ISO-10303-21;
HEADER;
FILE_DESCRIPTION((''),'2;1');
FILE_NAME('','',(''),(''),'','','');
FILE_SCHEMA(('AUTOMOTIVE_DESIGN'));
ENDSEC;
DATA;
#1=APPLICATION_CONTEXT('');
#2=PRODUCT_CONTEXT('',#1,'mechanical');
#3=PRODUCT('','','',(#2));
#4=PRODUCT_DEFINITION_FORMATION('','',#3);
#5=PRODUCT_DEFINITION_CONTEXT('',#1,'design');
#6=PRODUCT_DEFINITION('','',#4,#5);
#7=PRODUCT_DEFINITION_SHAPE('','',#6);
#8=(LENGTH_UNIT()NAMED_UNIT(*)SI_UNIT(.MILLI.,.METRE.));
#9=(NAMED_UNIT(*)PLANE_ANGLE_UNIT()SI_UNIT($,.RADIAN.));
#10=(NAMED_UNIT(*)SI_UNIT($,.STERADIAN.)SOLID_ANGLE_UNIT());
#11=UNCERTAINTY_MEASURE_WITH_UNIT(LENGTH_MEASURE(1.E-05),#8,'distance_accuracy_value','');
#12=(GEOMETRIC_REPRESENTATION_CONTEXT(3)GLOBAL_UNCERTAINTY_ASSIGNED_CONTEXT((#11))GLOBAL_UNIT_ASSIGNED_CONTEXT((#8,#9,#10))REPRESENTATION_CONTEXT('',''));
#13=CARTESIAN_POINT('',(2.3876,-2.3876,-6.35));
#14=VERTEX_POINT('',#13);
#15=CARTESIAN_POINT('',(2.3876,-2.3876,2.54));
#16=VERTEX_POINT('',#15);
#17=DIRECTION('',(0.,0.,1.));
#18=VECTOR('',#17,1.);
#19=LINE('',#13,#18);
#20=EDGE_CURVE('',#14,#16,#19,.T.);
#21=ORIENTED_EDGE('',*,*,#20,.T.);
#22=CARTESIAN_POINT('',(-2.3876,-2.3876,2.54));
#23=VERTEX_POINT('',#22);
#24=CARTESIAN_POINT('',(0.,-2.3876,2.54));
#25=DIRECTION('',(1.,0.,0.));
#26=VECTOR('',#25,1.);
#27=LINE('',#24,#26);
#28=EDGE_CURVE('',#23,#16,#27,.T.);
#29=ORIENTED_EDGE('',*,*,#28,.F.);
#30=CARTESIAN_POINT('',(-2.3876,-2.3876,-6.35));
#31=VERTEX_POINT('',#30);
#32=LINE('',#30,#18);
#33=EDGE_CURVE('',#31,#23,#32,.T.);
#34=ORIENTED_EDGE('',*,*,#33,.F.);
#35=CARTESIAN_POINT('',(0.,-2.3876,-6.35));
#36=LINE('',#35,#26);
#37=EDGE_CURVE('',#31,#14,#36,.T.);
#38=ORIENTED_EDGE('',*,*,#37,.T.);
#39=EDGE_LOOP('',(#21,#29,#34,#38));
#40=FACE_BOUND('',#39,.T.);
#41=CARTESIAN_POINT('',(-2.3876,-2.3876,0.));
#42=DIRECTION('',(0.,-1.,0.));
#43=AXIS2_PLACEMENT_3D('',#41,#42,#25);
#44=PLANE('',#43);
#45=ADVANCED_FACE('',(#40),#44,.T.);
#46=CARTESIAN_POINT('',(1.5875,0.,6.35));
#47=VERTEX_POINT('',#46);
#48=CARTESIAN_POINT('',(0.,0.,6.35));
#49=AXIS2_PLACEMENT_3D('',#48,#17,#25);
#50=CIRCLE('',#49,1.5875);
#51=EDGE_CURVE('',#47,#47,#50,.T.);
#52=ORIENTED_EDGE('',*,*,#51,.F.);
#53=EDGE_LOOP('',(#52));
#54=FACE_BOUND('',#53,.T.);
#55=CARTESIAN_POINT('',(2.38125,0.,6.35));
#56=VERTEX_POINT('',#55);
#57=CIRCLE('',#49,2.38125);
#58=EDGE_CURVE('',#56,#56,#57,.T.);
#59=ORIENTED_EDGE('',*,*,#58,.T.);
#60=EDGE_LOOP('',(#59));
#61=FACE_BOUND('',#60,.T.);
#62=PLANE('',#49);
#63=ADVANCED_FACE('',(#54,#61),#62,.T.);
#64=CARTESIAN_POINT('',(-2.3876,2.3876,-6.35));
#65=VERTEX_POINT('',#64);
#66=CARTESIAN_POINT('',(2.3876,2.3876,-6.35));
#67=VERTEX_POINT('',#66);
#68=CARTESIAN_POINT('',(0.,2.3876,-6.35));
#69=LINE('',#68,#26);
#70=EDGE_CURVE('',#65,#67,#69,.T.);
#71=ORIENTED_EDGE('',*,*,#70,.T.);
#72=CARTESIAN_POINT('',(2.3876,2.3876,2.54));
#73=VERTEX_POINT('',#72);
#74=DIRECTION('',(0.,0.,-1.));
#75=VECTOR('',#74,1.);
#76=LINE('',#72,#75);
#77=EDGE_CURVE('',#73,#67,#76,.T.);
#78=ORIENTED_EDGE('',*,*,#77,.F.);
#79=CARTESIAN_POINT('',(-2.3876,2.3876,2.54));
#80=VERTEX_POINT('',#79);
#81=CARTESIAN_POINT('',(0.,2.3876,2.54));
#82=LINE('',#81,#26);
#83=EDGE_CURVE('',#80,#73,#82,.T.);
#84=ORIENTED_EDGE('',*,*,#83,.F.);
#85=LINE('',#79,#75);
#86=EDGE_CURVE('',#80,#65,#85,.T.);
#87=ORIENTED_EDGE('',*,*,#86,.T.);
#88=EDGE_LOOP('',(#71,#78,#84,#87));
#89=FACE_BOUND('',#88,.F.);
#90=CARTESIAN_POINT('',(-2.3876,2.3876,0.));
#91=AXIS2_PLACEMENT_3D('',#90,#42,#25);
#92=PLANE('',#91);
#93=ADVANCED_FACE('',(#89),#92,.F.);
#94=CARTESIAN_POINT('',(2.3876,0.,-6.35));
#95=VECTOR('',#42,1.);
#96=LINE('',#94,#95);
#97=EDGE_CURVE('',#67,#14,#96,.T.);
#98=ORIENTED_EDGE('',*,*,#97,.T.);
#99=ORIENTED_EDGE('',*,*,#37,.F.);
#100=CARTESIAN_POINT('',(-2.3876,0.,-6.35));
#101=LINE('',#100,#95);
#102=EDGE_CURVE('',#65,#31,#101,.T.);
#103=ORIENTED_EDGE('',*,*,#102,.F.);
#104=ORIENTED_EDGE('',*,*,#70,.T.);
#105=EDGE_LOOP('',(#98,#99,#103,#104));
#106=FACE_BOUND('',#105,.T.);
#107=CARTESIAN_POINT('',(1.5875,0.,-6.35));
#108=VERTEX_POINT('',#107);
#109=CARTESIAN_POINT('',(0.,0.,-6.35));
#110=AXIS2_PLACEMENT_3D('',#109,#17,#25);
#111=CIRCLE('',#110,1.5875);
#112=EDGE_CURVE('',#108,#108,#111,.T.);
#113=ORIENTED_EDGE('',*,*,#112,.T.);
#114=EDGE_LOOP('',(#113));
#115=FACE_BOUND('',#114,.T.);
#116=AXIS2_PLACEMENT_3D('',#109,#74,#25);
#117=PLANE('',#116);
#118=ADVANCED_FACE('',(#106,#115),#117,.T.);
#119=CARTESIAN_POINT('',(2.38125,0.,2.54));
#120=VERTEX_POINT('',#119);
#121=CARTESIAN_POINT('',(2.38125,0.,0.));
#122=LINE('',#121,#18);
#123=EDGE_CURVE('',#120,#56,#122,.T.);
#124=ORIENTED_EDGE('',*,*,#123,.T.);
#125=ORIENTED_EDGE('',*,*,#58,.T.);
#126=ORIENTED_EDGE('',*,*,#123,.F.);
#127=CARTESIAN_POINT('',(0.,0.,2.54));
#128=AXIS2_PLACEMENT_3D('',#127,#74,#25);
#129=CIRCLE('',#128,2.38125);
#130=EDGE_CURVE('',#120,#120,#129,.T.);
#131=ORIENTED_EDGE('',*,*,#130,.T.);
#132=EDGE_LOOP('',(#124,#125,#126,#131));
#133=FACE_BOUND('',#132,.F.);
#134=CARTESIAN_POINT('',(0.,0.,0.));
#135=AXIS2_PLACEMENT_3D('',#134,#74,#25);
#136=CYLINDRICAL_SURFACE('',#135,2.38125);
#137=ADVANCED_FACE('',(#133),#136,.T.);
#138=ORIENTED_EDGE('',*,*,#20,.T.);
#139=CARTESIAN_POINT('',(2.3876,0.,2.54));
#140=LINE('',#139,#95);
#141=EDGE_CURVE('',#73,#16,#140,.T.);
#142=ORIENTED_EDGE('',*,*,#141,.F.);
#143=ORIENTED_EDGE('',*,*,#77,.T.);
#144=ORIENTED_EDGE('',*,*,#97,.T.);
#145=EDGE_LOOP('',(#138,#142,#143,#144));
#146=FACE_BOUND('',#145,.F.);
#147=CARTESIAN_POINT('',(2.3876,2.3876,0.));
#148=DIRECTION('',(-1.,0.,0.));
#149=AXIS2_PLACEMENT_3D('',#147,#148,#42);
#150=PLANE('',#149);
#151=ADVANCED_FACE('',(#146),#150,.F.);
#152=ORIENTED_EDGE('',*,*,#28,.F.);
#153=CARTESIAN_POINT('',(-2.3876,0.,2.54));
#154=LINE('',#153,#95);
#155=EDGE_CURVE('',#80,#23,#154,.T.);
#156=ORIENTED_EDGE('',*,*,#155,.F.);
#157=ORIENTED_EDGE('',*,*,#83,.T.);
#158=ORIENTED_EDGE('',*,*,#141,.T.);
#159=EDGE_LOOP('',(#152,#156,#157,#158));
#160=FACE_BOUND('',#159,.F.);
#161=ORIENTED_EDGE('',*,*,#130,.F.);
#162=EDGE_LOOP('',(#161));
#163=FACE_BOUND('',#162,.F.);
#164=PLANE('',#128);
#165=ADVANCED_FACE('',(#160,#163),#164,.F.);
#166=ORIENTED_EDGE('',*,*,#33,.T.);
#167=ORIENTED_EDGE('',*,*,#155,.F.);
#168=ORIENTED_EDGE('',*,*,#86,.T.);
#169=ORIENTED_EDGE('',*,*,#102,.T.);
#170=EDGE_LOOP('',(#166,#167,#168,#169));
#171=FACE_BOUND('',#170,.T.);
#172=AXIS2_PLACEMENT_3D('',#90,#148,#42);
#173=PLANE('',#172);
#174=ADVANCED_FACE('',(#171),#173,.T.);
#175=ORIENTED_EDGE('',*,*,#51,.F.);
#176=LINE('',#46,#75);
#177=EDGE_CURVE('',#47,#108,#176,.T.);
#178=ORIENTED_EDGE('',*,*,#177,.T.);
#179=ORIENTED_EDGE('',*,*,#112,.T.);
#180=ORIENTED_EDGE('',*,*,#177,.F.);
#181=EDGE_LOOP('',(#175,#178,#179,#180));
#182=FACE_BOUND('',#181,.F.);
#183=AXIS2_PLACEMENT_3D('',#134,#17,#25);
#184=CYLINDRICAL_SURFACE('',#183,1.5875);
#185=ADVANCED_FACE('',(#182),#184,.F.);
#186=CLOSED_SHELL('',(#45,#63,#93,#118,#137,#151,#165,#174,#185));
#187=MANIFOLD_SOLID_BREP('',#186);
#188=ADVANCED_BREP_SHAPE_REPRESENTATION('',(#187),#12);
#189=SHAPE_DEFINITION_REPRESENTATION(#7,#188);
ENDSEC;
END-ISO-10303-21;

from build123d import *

# Parameters (mm, degrees)
F0_R     = 2.38125
F1_DEPTH = 6.35
F2_R     = 1.5875
F3_DEPTH = 6.35
F4_W     = 4.7752
F4_H     = 4.7752
F4_R     = 2.38125
F5_DEPTH = 2.54
F6_DEPTH = 6.35


with BuildPart() as f1:
    # F0 (on Top) → F1 (new body)
    with BuildSketch(Plane.XY):
        Circle(F0_R)
    extrude(amount=F1_DEPTH)

    # F2 (on face) → F3 (cut)
    with BuildSketch(Plane.XY.offset(6.35)):
        Circle(F2_R)
    extrude(amount=-F3_DEPTH, mode=Mode.SUBTRACT)

    # F4 (on face) → F5 (join)
    with BuildSketch(Plane(origin=(0, 0, 0), x_dir=(1, 0, 0), z_dir=(0, 0, -1))):
        Rectangle(F4_W, F4_H)
        Circle(F4_R, mode=Mode.SUBTRACT)
    extrude(amount=-F5_DEPTH)

    # F6 (add): a face of the model
    f6_faces = [f1.faces().sort_by_distance(p)[0] for p in [
        (-2.320068474, 0, 0),
    ]]
    extrude(f6_faces, amount=F6_DEPTH)


solid = f1.part
